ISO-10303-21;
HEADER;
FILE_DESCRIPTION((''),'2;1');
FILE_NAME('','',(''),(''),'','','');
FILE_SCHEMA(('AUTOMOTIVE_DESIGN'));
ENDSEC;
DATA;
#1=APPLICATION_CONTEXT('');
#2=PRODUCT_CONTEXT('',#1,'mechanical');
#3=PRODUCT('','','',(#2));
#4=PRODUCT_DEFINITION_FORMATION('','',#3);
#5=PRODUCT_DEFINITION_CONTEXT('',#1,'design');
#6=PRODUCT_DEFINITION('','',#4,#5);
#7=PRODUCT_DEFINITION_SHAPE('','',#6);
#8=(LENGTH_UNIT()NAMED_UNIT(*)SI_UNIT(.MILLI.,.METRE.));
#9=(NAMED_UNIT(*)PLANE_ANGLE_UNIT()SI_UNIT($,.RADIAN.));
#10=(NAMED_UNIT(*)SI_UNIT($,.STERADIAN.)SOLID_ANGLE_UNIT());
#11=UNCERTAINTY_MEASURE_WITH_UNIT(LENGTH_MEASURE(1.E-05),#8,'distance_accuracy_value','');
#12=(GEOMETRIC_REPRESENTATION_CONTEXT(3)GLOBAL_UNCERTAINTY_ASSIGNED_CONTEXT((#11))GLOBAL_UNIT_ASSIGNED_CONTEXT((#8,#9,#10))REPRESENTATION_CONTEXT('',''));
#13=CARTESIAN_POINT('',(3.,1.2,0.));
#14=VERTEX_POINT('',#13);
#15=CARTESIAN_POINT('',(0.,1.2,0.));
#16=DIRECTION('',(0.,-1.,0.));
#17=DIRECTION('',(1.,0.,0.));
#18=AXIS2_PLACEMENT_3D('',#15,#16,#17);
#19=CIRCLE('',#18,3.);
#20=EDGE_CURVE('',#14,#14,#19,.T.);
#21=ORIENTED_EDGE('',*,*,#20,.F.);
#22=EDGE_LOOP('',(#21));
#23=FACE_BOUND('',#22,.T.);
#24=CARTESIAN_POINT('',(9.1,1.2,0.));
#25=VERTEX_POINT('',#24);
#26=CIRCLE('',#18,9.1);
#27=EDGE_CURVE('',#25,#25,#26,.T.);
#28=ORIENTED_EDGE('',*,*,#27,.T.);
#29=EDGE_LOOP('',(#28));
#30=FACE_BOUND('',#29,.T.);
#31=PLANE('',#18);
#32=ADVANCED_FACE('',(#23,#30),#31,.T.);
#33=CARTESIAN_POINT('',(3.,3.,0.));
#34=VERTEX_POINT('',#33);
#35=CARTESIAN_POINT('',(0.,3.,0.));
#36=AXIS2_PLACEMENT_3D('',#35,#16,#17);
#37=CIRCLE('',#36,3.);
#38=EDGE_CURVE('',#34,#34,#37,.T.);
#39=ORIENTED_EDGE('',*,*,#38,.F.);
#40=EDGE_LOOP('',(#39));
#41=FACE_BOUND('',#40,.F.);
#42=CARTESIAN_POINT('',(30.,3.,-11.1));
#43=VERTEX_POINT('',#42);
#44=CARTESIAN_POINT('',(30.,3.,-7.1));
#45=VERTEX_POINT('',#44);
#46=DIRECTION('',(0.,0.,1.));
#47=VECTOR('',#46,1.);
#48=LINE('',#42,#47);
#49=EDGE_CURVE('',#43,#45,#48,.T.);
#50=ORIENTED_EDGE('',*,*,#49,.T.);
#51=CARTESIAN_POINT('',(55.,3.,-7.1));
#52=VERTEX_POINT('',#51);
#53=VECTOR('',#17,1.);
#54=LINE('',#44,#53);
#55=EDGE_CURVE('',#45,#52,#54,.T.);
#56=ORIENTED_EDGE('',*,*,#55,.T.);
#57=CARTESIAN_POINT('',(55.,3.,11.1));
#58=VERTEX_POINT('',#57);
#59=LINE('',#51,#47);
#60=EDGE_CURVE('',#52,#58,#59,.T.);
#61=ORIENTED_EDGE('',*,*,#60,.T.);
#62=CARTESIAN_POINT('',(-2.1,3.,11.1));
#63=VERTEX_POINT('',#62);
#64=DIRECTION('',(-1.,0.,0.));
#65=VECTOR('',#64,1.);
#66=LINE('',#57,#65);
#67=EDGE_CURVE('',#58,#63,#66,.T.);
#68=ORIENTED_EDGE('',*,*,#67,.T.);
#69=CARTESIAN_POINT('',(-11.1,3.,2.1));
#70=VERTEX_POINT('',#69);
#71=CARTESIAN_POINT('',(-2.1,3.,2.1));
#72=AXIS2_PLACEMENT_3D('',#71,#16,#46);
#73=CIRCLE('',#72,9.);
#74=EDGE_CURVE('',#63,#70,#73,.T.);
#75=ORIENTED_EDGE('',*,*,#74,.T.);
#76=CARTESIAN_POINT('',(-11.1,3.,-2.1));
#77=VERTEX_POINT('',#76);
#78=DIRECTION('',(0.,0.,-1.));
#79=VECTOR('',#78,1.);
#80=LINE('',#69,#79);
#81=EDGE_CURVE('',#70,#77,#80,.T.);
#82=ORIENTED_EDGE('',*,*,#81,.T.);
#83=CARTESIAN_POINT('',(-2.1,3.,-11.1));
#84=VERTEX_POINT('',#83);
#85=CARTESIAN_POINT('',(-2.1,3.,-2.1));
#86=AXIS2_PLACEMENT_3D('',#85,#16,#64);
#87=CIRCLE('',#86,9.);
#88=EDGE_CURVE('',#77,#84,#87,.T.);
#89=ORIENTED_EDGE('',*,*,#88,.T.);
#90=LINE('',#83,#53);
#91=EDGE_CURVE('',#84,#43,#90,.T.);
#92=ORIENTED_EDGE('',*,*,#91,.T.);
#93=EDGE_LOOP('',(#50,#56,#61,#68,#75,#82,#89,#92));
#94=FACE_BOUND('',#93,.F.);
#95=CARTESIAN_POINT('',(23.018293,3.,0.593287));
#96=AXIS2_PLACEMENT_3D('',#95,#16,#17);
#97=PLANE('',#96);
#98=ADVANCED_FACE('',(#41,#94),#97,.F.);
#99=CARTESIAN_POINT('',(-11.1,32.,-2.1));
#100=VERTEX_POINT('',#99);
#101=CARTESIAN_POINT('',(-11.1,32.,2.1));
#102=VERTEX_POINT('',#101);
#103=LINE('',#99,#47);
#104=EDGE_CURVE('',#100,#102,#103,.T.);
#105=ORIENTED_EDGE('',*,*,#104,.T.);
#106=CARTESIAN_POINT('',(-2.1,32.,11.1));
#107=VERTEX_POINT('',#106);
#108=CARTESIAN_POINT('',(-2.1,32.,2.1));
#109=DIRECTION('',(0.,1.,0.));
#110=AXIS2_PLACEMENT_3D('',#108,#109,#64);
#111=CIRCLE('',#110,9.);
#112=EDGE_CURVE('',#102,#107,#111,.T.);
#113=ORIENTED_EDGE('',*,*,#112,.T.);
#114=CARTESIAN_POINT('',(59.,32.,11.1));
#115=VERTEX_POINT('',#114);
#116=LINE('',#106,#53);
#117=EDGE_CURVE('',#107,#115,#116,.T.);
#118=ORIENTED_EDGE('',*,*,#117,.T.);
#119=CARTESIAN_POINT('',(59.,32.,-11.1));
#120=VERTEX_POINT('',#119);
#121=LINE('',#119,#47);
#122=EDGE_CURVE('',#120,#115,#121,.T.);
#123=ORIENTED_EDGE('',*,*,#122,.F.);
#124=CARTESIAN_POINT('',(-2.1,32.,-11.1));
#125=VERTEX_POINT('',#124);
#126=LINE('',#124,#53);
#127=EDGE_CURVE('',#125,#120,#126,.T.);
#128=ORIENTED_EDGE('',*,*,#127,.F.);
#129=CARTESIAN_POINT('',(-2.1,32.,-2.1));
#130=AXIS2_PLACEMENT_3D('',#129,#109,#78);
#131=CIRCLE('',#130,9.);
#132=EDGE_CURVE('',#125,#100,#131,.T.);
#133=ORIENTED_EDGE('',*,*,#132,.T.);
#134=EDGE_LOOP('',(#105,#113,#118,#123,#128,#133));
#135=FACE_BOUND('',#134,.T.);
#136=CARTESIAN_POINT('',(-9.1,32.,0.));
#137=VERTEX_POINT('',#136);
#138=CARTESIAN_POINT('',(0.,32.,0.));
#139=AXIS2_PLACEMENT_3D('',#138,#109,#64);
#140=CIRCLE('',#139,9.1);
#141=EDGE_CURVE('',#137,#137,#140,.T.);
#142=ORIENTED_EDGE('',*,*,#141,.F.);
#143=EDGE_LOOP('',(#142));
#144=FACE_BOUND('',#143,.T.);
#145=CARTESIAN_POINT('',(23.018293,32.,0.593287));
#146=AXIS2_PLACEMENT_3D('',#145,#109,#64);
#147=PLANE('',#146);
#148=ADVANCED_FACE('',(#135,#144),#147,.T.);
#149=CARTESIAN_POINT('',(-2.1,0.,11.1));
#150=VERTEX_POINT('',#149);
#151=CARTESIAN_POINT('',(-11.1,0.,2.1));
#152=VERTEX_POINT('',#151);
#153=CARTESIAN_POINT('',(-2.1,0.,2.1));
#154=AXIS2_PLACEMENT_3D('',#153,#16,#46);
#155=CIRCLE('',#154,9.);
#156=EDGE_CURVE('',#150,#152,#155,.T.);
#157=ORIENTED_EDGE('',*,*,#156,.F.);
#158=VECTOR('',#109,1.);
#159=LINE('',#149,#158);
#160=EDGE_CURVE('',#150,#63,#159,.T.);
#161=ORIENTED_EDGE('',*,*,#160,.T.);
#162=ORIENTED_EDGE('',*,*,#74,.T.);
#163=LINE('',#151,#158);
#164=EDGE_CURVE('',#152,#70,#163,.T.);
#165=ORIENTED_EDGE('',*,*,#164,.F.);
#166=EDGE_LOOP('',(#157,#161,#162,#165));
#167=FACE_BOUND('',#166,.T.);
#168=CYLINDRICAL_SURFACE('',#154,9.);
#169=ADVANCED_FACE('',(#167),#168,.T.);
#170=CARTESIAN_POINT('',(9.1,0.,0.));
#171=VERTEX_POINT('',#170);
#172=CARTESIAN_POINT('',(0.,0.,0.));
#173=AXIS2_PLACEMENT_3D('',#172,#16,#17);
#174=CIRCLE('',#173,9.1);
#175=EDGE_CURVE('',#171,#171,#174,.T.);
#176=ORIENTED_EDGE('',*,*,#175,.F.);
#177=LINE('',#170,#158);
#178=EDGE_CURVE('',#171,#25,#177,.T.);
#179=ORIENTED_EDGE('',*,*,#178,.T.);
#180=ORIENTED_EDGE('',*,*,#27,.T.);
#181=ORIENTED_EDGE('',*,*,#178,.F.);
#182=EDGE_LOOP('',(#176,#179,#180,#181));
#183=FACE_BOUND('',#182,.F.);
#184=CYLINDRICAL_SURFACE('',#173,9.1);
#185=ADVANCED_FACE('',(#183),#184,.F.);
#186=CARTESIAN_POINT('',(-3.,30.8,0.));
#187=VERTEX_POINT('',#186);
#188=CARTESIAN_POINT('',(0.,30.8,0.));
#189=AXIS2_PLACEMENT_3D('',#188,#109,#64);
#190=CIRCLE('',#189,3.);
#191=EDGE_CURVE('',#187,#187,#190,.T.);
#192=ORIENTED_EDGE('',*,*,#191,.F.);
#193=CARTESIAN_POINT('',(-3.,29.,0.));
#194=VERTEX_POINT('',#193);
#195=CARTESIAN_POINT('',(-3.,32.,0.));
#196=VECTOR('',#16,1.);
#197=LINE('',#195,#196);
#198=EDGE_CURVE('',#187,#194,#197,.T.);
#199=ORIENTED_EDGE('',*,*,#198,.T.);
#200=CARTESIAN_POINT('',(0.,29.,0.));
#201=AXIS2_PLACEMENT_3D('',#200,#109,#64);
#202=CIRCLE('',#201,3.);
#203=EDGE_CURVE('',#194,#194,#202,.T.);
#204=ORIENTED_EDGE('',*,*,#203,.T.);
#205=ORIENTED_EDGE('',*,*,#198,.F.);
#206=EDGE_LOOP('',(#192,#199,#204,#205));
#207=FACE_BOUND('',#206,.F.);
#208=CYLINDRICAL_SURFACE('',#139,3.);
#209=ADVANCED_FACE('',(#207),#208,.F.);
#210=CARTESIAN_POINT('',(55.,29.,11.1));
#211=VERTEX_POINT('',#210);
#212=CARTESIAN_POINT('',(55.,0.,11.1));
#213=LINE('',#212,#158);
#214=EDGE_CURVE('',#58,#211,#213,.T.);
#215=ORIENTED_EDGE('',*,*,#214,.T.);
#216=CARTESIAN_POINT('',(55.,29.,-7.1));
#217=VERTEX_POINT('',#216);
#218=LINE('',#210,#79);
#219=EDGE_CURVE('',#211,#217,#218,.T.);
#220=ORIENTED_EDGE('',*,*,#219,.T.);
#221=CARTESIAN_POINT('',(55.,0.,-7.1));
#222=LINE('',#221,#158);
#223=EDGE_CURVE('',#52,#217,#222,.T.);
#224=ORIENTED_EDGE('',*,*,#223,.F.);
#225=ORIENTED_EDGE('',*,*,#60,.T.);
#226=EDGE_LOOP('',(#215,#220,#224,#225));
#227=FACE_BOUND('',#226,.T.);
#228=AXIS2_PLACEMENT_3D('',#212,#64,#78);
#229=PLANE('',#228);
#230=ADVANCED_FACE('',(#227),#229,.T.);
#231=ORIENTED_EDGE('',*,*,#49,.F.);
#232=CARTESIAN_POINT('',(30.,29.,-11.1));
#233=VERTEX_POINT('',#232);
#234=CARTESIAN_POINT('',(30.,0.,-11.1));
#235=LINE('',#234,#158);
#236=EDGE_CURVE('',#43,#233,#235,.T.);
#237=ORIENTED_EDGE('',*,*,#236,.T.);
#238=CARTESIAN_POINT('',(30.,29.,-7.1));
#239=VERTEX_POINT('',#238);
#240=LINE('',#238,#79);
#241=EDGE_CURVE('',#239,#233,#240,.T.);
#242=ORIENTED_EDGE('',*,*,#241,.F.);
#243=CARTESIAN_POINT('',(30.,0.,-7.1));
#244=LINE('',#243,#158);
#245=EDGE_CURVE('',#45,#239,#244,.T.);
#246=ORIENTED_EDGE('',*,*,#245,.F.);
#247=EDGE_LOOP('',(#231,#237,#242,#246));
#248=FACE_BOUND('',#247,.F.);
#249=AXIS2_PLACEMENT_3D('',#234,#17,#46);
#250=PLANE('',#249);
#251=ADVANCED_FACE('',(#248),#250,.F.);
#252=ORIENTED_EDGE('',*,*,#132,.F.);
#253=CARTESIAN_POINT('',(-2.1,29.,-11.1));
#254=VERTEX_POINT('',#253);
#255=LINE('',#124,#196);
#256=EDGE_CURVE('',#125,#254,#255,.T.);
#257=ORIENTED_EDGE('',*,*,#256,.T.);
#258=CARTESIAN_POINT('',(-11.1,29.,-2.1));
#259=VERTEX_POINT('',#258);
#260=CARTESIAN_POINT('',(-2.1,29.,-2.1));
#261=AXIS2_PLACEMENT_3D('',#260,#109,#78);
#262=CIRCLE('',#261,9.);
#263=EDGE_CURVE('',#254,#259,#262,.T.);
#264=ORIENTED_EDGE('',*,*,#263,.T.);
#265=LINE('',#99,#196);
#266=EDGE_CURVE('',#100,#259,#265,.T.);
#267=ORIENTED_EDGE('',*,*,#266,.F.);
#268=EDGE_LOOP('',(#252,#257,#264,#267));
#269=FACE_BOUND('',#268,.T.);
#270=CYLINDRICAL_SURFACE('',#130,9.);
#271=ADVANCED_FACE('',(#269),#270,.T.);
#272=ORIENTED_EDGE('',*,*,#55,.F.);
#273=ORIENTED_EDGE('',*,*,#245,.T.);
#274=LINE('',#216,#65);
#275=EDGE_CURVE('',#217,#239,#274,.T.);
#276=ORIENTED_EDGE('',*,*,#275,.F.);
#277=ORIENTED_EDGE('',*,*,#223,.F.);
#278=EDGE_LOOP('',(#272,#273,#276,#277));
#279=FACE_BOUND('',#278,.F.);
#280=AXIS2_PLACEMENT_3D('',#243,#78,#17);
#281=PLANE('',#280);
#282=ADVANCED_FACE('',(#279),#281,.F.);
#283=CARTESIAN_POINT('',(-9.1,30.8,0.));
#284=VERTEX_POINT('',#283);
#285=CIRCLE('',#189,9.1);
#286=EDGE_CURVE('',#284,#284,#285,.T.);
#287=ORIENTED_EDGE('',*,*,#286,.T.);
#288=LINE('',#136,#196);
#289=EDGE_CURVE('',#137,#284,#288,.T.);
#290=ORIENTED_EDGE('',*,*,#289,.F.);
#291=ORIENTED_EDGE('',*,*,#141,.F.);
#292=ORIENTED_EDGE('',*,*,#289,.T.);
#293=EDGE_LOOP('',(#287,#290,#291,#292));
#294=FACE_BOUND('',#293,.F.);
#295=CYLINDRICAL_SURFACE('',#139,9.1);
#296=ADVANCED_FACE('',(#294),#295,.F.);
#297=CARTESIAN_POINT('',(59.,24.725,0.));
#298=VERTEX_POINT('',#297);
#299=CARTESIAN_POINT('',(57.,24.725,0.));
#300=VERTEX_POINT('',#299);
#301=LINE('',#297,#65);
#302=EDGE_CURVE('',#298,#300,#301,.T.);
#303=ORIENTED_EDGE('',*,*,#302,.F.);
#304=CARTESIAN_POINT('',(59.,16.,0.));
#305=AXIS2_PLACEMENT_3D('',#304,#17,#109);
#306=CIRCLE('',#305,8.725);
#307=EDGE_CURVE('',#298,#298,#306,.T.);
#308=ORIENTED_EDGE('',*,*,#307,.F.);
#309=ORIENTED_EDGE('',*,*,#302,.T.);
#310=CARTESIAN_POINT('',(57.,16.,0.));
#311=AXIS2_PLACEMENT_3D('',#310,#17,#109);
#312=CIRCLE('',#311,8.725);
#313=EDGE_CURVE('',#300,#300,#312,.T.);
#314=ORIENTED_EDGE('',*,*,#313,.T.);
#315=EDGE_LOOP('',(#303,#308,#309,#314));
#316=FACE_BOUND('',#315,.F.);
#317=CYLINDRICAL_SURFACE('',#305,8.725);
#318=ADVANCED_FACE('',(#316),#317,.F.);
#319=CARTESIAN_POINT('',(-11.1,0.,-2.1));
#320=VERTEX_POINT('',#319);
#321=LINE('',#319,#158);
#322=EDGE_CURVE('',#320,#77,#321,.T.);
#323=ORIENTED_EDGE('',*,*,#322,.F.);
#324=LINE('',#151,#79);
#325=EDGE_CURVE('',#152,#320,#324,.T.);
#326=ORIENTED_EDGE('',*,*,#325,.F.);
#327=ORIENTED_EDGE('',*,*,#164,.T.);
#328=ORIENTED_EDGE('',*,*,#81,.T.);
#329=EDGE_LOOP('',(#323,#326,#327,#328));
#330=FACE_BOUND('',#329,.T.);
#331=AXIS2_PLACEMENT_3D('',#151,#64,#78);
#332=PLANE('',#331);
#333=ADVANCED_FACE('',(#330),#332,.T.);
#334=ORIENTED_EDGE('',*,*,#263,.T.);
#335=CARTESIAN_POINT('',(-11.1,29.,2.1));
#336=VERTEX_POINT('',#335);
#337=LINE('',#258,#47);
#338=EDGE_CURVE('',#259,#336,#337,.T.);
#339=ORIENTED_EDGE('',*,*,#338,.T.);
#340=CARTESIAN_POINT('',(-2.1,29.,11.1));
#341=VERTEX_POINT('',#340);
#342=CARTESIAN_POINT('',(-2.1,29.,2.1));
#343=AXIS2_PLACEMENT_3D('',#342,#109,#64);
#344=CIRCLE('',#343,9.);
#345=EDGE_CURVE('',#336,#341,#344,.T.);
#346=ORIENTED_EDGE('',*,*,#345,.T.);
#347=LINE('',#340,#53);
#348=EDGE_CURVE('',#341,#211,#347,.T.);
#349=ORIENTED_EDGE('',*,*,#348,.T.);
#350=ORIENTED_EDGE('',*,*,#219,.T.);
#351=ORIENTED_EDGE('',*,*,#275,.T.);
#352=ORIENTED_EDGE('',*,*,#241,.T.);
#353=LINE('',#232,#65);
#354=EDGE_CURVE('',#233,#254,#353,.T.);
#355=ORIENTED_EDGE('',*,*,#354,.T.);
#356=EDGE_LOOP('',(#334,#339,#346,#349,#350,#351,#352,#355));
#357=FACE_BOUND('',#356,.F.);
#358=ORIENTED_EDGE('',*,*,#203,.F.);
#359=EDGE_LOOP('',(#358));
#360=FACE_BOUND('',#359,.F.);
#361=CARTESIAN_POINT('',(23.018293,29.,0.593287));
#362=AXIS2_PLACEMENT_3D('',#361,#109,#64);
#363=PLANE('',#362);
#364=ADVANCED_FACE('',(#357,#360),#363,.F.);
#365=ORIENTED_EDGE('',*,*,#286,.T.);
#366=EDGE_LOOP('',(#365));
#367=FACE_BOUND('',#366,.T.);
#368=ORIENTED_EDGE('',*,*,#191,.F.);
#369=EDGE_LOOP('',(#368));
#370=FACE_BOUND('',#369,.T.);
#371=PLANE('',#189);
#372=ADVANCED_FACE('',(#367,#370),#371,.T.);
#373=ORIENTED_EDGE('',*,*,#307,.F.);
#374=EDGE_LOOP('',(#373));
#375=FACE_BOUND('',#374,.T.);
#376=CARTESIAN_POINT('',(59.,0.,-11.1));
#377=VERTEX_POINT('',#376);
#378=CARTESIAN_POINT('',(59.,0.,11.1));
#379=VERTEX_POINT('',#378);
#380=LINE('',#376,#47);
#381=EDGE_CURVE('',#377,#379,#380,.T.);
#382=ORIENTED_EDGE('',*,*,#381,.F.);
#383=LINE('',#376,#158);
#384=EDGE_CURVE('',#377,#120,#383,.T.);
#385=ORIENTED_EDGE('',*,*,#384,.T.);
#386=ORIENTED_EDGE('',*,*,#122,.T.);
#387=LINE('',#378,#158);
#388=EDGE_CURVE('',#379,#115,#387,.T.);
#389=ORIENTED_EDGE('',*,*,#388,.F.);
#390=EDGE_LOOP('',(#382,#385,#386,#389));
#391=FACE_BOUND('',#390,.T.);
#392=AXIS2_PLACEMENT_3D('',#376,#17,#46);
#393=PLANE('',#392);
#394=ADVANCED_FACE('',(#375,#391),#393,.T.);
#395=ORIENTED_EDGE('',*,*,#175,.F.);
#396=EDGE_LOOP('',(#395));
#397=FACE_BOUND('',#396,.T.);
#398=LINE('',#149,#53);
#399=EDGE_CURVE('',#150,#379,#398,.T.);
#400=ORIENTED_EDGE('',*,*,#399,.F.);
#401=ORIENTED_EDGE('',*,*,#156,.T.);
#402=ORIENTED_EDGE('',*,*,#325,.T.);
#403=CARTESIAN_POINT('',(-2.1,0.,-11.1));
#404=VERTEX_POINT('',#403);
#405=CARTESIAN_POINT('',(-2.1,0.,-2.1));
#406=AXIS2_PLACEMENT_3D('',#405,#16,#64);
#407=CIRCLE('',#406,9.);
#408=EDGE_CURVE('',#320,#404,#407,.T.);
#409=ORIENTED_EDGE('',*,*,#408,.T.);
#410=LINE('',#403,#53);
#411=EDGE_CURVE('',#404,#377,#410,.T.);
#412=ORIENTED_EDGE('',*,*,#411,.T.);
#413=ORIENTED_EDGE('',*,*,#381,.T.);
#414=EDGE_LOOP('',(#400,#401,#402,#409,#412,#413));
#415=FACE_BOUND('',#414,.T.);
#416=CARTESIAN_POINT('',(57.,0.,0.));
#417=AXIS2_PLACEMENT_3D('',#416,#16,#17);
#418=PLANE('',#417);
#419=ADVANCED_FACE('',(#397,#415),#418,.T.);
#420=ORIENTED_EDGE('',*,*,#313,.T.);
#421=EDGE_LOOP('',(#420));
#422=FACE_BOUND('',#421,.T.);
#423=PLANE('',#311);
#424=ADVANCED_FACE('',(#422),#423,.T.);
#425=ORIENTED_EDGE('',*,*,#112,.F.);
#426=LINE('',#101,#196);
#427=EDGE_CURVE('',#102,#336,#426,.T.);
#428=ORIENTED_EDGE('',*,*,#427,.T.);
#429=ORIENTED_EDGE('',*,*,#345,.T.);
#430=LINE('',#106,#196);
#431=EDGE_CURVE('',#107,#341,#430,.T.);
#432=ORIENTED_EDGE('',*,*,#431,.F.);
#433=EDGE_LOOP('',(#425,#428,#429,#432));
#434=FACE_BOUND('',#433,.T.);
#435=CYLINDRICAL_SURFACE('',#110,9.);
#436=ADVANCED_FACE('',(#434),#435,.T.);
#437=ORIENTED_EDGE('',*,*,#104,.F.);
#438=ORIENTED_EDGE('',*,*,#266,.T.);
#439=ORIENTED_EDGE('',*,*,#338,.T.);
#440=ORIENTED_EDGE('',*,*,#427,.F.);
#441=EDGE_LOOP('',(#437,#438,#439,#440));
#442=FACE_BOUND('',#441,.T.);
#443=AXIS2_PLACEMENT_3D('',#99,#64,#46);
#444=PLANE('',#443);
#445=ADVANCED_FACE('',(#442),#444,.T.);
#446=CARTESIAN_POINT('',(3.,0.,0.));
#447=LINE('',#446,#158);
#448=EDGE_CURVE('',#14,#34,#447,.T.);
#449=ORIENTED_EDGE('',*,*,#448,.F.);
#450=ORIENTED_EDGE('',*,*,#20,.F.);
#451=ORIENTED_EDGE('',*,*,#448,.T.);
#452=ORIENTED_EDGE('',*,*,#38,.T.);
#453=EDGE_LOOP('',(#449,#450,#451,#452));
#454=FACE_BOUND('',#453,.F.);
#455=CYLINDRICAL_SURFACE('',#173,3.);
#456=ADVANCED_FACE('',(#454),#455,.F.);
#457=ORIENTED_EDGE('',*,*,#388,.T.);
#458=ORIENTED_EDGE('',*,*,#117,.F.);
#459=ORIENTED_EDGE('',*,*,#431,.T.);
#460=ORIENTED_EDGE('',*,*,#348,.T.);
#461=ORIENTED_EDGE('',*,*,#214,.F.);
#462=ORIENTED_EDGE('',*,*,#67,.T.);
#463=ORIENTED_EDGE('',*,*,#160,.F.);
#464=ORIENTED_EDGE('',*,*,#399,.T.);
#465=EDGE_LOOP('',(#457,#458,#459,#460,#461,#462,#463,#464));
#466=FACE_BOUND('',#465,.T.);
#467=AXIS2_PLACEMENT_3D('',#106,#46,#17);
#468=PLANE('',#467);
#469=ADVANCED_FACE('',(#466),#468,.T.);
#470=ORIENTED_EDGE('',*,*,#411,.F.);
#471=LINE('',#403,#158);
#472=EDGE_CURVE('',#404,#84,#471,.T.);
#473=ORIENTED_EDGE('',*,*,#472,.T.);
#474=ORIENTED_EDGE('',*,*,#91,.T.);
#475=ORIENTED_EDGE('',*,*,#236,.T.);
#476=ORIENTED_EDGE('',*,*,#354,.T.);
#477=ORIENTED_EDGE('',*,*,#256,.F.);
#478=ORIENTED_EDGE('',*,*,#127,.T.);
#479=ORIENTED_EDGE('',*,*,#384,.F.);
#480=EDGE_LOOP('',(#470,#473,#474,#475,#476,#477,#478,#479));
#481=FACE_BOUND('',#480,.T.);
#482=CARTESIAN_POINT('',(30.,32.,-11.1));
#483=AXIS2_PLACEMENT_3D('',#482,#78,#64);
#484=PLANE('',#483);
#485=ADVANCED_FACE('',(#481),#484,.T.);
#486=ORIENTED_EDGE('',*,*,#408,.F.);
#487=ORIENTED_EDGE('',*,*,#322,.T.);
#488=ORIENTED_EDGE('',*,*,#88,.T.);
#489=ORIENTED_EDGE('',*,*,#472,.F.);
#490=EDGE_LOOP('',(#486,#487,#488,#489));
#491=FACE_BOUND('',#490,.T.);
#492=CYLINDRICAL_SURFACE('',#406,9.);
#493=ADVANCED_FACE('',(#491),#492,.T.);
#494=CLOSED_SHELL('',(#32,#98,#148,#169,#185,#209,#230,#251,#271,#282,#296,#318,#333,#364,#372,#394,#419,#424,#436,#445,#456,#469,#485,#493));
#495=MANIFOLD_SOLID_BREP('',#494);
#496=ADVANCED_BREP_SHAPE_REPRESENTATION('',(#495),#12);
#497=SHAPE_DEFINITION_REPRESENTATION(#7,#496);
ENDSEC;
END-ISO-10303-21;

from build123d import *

# Parameters (mm, degrees)
F0_R     = 9.1
F0_R_2   = 3
F1_DEPTH = 3
F0_W     = 25
F0_H     = 4
F2_DEPTH = 32
F3_R     = 9.1
F3_R_2   = 3
F4_DEPTH = 3
F5_DEPTH = 1.2
F6_R     = 8.725
F7_DEPTH = 2
F8_DEPTH = 1.2


# Not quite as in the source:
# - a feature names something its author has since deleted; it is built from what else it names


with BuildPart() as f1:
    # F0 (on Front) → F1 (new body)
    with BuildSketch(Plane.XZ):
        with BuildLine():
            Line((55, 11.1), (-2.1, 11.1))
            ThreePointArc((-2.1, 11.1), (-8.4639610307, 8.4639610307), (-11.1, 2.1))
            Line((-11.1, 2.1), (-11.1, -2.1))
            ThreePointArc((-11.1, -2.1), (-8.4639610307, -8.4639610307), (-2.1, -11.1))
            Line((-2.1, -11.1), (30, -11.1))
            Line((30, -11.1), (30, -7.1))
            Line((30, -7.1), (55, -7.1))
            Line((55, -7.1), (55, 11.1))
        make_face()
        Circle(F0_R, mode=Mode.SUBTRACT)
        Circle(F0_R)
        Circle(F0_R_2, mode=Mode.SUBTRACT)
    extrude(amount=-F1_DEPTH)

    # F0 (on Front) → F2 (join)
    with BuildSketch(Plane.XZ):
        Polygon((59, 11.1), (55, 11.1), (55, -7.1), (55, -11.1), (59, -11.1), align=None)
        with Locations((42.5, -9.1)):
            Rectangle(F0_W, F0_H)
    extrude(amount=-F2_DEPTH)

    # F3 (on face) → F4 (join)
    with BuildSketch(Plane(origin=(0, 32, 0), x_dir=(-1, 0, 0), z_dir=(0, 1, 0))):
        with BuildLine():
            Line((-30, -7.1), (-30, -11.1))
            Line((-30, -11.1), (2.1, -11.1))
            ThreePointArc((2.1, -11.1), (8.4639610307, -8.4639610307), (11.1, -2.1))
            Line((11.1, -2.1), (11.1, 2.1))
            ThreePointArc((11.1, 2.1), (8.4639610307, 8.4639610307), (2.1, 11.1))
            Line((2.1, 11.1), (-55, 11.1))
            Line((-55, 11.1), (-55, -7.1))
            Line((-55, -7.1), (-30, -7.1))
        make_face()
        Circle(F3_R, mode=Mode.SUBTRACT)
        Circle(F3_R)
        Circle(F3_R_2, mode=Mode.SUBTRACT)
    extrude(amount=-F4_DEPTH)

    # F0 (on Front) → F5 (cut)
    with BuildSketch(Plane.XZ):
        Circle(F0_R)
        Circle(F0_R_2, mode=Mode.SUBTRACT)
    extrude(amount=-F5_DEPTH, mode=Mode.SUBTRACT)

    # F6 (on face) → F7 (cut)
    with BuildSketch(Plane.YZ.offset(59)):
        with Locations((16, 0)):
            Circle(F6_R)
    extrude(amount=-F7_DEPTH, mode=Mode.SUBTRACT)

    # F3 (on face) → F8 (cut)
    with BuildSketch(Plane(origin=(0, 32, 0), x_dir=(-1, 0, 0), z_dir=(0, 1, 0))):
        Circle(F3_R)
        Circle(F3_R_2, mode=Mode.SUBTRACT)
    extrude(amount=-F8_DEPTH, mode=Mode.SUBTRACT)


solid = f1.part
